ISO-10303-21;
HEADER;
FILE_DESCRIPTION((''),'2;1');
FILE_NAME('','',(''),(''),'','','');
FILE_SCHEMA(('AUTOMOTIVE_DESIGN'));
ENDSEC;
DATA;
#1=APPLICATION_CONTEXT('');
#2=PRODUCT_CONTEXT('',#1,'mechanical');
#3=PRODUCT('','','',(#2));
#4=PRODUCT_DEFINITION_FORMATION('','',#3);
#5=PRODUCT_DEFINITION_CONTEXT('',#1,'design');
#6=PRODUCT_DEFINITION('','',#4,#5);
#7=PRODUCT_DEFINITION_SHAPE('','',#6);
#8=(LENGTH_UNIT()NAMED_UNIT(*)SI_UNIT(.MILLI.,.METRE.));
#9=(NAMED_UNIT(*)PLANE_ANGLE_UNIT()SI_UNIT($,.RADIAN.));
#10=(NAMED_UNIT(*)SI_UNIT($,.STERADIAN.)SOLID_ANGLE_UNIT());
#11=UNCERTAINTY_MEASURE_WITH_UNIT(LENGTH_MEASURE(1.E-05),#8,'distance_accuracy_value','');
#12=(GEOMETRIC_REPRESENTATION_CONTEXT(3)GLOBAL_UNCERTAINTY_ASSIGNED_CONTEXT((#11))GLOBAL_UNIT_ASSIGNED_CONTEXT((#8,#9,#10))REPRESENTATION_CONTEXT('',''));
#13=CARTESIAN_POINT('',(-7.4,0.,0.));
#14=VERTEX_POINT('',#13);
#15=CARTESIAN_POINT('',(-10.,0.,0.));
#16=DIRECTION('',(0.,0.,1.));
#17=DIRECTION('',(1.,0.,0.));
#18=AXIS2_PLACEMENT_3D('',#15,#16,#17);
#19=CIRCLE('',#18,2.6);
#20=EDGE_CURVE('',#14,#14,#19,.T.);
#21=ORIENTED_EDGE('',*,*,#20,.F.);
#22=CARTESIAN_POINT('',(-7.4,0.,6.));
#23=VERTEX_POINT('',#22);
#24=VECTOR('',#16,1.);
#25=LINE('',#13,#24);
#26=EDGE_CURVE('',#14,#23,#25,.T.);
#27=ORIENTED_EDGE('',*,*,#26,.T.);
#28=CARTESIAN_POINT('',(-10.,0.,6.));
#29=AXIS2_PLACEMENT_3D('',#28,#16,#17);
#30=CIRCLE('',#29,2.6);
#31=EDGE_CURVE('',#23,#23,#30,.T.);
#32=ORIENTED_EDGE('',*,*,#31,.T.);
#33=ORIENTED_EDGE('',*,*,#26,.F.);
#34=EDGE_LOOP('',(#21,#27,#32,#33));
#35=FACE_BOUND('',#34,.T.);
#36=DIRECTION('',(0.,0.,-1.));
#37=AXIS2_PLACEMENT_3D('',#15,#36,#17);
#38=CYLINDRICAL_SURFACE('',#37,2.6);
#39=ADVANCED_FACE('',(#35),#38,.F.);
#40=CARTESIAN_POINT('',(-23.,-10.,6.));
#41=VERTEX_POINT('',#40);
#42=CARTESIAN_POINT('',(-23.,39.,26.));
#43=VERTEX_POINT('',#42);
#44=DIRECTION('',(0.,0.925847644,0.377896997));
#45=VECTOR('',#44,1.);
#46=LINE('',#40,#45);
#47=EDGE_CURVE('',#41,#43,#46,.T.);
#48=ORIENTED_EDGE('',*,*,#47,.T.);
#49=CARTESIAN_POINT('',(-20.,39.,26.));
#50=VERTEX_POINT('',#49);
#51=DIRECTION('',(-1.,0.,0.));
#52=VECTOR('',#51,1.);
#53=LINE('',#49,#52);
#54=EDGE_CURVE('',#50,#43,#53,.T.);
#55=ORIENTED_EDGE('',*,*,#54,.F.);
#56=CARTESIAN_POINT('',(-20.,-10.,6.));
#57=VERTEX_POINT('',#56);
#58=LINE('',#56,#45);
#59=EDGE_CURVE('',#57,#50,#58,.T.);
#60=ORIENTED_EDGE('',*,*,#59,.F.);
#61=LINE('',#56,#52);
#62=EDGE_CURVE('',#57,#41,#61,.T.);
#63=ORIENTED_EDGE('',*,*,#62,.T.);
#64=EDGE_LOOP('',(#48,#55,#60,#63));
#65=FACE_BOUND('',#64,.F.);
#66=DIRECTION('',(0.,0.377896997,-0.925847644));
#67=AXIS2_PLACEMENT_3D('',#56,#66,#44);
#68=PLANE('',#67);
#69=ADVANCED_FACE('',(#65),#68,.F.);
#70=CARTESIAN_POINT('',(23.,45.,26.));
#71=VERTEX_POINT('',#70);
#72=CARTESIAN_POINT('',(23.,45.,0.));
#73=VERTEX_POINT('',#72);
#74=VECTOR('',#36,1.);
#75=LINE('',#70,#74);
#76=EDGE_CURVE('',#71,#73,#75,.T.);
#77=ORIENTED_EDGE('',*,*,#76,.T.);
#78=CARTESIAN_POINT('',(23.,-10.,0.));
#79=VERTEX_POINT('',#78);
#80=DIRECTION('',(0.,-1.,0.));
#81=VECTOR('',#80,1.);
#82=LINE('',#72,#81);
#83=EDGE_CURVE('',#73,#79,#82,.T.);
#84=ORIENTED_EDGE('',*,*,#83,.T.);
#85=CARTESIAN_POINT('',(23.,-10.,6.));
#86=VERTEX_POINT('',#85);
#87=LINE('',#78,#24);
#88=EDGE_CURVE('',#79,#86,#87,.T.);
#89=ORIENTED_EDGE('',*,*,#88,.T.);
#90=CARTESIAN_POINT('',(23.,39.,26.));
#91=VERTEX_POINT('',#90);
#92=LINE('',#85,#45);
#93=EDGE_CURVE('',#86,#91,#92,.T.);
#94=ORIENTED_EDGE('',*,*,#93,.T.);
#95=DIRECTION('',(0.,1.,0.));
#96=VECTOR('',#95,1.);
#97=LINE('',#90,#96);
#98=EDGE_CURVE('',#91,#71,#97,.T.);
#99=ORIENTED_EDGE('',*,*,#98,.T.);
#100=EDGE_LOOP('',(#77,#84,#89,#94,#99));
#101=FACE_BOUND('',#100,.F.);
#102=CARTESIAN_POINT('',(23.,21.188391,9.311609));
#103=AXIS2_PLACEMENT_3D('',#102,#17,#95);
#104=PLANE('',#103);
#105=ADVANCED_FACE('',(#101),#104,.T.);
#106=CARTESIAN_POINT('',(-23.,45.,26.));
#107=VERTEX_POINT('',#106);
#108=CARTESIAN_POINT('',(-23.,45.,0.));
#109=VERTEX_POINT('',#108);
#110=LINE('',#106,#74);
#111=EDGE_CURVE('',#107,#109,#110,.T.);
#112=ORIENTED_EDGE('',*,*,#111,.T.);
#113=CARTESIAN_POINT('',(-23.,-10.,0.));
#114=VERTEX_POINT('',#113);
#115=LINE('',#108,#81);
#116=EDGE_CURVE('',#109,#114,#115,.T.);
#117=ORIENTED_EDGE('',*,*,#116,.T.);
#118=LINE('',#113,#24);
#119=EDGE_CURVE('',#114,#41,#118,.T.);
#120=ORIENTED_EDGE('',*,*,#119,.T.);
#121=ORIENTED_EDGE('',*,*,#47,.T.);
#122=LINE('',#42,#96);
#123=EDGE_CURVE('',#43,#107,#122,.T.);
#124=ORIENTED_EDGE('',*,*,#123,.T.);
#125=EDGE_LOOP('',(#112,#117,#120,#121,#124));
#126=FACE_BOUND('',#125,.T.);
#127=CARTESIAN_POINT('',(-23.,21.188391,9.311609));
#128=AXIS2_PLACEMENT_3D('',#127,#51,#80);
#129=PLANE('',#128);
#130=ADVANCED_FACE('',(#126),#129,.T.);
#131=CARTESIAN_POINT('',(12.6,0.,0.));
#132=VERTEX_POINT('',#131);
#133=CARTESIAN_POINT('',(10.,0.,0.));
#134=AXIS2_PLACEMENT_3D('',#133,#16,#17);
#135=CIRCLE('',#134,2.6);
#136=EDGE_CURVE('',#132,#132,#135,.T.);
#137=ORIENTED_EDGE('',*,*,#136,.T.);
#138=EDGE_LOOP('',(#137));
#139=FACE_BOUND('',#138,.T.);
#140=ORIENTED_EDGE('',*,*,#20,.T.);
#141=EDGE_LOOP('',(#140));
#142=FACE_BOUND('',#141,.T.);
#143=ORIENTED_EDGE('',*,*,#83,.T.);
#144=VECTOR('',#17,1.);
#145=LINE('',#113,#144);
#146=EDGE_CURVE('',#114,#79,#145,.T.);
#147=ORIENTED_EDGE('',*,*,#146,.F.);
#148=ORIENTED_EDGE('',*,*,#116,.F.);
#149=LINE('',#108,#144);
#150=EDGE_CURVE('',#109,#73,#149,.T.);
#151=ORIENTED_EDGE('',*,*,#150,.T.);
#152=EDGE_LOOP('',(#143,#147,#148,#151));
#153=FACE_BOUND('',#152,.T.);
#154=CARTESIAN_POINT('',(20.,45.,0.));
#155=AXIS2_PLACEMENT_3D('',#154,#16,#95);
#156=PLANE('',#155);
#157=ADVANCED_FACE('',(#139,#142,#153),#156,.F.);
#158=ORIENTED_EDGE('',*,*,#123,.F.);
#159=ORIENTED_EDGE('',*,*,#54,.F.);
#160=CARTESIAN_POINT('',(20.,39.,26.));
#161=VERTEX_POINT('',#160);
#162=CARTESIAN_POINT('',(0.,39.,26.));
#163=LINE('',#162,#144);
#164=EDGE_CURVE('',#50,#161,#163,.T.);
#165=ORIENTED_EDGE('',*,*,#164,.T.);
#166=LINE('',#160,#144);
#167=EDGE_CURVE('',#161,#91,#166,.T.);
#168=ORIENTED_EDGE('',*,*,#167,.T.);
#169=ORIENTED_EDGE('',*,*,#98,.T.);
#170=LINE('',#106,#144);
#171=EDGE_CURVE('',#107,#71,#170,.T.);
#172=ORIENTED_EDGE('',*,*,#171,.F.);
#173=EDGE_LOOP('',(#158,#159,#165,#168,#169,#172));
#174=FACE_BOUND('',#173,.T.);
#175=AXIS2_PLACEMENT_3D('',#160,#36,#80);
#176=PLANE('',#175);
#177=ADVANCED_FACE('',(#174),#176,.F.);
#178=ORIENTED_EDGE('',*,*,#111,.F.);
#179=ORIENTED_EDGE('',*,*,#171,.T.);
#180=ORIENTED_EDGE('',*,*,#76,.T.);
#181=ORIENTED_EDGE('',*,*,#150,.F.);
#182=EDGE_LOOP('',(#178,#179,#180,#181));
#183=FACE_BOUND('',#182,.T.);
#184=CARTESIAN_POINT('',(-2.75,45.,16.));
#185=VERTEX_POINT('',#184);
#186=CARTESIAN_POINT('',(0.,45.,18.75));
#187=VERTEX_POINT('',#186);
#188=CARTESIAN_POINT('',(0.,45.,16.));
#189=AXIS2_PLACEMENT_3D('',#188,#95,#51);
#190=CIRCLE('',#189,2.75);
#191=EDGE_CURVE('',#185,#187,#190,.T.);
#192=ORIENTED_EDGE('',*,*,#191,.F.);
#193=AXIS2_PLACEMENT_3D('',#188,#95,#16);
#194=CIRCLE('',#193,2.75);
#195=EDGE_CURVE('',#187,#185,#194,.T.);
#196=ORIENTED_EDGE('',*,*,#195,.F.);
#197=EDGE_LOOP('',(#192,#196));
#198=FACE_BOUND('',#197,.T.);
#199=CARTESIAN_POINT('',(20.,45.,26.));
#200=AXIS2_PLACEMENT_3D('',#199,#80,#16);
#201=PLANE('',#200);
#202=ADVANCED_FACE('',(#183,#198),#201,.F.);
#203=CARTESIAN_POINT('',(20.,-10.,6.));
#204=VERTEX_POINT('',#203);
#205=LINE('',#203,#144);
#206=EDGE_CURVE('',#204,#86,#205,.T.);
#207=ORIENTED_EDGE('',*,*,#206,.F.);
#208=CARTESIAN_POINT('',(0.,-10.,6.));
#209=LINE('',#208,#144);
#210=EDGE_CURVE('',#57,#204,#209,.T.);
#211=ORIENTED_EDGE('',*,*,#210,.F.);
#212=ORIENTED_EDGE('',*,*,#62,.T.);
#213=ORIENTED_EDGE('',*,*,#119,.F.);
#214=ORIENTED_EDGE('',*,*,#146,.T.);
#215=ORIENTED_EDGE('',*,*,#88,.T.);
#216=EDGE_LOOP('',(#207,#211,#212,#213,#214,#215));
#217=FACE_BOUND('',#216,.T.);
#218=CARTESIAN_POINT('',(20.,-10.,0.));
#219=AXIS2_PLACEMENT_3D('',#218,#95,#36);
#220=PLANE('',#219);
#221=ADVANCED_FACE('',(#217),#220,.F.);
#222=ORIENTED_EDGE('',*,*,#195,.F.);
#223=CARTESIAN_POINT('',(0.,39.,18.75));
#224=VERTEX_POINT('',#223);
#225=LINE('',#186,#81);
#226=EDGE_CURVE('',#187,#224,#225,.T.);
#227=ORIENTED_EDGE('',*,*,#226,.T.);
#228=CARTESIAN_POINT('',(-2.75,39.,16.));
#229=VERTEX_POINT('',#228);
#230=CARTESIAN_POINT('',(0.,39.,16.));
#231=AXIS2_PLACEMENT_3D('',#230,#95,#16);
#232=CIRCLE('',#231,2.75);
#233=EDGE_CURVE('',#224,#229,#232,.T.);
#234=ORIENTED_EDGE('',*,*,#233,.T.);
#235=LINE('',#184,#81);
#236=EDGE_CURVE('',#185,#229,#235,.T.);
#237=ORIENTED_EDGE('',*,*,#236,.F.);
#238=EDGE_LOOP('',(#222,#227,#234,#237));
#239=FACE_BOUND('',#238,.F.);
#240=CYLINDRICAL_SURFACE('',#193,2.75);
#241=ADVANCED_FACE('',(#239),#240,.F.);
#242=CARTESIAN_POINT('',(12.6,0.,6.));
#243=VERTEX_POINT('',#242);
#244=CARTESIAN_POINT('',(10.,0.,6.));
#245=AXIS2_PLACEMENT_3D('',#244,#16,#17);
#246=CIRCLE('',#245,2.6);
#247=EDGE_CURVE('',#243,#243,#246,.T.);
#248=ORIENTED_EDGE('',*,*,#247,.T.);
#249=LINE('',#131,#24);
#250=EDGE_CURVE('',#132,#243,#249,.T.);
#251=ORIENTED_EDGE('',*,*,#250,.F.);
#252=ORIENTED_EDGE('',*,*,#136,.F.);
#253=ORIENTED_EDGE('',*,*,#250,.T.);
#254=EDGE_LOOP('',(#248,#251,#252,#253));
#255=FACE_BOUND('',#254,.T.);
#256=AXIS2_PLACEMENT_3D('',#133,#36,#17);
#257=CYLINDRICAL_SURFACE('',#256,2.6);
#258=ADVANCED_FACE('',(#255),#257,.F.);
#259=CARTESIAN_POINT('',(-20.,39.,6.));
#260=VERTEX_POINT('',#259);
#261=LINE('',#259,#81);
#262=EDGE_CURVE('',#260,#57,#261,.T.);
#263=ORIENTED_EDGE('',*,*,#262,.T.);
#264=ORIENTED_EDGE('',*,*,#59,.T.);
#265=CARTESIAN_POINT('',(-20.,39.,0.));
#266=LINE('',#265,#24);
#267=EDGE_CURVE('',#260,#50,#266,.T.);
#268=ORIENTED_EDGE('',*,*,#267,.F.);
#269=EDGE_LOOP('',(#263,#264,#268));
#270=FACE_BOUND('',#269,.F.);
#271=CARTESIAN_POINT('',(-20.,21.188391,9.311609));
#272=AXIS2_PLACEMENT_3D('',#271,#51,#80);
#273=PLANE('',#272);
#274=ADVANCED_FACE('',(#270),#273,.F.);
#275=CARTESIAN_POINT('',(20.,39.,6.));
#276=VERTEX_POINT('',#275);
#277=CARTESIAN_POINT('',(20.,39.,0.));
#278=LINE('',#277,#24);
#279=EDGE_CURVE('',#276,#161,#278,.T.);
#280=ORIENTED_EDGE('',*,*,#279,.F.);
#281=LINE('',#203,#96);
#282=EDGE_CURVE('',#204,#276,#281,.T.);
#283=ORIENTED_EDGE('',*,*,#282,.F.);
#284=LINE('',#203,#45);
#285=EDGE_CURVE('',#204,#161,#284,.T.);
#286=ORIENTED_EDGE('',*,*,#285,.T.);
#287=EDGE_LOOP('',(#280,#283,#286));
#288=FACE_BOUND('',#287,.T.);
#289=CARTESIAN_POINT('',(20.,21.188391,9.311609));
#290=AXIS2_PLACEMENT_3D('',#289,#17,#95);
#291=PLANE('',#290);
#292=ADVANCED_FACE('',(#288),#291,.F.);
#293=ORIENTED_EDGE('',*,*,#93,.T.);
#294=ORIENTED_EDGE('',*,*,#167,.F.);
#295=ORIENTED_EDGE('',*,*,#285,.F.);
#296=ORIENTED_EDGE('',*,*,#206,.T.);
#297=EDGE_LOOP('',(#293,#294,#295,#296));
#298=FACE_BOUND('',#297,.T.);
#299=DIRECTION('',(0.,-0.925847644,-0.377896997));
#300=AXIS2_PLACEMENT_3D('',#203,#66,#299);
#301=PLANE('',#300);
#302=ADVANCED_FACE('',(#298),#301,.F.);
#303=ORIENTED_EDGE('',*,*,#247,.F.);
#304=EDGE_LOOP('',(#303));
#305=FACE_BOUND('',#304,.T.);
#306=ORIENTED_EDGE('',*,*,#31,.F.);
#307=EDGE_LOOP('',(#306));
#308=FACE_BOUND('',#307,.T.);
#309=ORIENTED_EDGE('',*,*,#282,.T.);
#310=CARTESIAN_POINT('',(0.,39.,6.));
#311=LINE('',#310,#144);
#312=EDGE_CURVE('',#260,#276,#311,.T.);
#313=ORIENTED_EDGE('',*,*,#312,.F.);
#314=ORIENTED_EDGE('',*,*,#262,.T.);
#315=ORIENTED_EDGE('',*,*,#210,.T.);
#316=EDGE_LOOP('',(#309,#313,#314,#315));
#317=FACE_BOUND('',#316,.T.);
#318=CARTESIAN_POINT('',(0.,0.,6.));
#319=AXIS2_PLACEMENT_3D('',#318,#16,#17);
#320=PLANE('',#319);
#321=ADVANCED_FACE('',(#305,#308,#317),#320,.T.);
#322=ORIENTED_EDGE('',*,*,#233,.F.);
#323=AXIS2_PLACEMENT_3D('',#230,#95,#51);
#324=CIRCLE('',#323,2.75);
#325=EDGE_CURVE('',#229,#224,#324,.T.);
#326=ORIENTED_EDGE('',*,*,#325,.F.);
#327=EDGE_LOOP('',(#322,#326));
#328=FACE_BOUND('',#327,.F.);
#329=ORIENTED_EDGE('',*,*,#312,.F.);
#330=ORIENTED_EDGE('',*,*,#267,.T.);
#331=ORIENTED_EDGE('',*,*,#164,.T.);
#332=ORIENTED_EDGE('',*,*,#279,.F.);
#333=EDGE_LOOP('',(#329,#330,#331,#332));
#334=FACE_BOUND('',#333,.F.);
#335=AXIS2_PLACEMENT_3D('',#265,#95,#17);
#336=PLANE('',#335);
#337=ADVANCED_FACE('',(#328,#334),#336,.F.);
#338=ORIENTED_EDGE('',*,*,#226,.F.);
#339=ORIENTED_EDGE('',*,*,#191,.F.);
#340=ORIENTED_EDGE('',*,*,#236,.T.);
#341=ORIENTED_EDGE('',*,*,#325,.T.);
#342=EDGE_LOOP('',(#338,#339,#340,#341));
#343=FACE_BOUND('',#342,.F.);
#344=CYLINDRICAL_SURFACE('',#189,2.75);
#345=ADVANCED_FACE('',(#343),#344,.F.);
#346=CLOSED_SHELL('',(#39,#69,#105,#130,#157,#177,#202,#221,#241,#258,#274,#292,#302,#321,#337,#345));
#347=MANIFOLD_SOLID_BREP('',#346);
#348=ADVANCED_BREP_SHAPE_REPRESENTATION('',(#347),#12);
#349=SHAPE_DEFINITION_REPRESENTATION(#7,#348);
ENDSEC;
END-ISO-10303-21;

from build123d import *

# Parameters (mm, degrees)
F0_W     = 40
F0_H     = 20
F0_R     = 2.6
F0_H_2   = 29
F1_DEPTH = 6
F0_H_3   = 6
F2_DEPTH = 26
F4_DEPTH = 3
F6_DEPTH = 25


# Not quite as in the source:
# - a pattern or mirror of a feature is missing from the dataset's text; its kind, count and spacing are read off the source's solid


with BuildPart() as f1:
    # F0 (on Top) → F1 (new body)
    with BuildSketch(Plane.XY):
        Rectangle(F0_W, F0_H)
        with Locations((-10, 0)):
            Circle(F0_R, mode=Mode.SUBTRACT)
        with Locations((10, 0)):
            Circle(F0_R, mode=Mode.SUBTRACT)
        with Locations((0, 24.5)):
            Rectangle(F0_W, F0_H_2)
    extrude(amount=F1_DEPTH)

    # F0 (on Top) → F2 (join)
    with BuildSketch(Plane.XY):
        with Locations((0, 42)):
            Rectangle(F0_W, F0_H_3)
    extrude(amount=F2_DEPTH)

    # F3 (on face) → F4 (join)
    with BuildSketch(Plane(origin=(-20, 0, 0), x_dir=(0, -1, 0), z_dir=(-1, 0, 0))):
        Polygon((10, 0), (10, 6), (-39, 26), (-45, 26), (-45, 0), align=None)
    f4 = extrude(amount=F4_DEPTH)

    # F4_copies: F4 across plane
    add(f4.mirror(Plane(origin=(0, 0, 0), x_dir=(0, 0, 1), z_dir=(1, 0, 0))))

    # F5 (on face) → F6 (cut)
    with BuildSketch(Plane(origin=(0, 45, 0), x_dir=(-1, 0, 0), z_dir=(0, 1, 0))):
        with BuildLine():
            ThreePointArc((0, 18.75), (-1.9445436483, 14.0554563517), (2.75, 16))
            ThreePointArc((2.75, 16), (1.9445436483, 17.9445436483), (0, 18.75))
        make_face()
    extrude(amount=-F6_DEPTH, mode=Mode.SUBTRACT)


solid = f1.part
